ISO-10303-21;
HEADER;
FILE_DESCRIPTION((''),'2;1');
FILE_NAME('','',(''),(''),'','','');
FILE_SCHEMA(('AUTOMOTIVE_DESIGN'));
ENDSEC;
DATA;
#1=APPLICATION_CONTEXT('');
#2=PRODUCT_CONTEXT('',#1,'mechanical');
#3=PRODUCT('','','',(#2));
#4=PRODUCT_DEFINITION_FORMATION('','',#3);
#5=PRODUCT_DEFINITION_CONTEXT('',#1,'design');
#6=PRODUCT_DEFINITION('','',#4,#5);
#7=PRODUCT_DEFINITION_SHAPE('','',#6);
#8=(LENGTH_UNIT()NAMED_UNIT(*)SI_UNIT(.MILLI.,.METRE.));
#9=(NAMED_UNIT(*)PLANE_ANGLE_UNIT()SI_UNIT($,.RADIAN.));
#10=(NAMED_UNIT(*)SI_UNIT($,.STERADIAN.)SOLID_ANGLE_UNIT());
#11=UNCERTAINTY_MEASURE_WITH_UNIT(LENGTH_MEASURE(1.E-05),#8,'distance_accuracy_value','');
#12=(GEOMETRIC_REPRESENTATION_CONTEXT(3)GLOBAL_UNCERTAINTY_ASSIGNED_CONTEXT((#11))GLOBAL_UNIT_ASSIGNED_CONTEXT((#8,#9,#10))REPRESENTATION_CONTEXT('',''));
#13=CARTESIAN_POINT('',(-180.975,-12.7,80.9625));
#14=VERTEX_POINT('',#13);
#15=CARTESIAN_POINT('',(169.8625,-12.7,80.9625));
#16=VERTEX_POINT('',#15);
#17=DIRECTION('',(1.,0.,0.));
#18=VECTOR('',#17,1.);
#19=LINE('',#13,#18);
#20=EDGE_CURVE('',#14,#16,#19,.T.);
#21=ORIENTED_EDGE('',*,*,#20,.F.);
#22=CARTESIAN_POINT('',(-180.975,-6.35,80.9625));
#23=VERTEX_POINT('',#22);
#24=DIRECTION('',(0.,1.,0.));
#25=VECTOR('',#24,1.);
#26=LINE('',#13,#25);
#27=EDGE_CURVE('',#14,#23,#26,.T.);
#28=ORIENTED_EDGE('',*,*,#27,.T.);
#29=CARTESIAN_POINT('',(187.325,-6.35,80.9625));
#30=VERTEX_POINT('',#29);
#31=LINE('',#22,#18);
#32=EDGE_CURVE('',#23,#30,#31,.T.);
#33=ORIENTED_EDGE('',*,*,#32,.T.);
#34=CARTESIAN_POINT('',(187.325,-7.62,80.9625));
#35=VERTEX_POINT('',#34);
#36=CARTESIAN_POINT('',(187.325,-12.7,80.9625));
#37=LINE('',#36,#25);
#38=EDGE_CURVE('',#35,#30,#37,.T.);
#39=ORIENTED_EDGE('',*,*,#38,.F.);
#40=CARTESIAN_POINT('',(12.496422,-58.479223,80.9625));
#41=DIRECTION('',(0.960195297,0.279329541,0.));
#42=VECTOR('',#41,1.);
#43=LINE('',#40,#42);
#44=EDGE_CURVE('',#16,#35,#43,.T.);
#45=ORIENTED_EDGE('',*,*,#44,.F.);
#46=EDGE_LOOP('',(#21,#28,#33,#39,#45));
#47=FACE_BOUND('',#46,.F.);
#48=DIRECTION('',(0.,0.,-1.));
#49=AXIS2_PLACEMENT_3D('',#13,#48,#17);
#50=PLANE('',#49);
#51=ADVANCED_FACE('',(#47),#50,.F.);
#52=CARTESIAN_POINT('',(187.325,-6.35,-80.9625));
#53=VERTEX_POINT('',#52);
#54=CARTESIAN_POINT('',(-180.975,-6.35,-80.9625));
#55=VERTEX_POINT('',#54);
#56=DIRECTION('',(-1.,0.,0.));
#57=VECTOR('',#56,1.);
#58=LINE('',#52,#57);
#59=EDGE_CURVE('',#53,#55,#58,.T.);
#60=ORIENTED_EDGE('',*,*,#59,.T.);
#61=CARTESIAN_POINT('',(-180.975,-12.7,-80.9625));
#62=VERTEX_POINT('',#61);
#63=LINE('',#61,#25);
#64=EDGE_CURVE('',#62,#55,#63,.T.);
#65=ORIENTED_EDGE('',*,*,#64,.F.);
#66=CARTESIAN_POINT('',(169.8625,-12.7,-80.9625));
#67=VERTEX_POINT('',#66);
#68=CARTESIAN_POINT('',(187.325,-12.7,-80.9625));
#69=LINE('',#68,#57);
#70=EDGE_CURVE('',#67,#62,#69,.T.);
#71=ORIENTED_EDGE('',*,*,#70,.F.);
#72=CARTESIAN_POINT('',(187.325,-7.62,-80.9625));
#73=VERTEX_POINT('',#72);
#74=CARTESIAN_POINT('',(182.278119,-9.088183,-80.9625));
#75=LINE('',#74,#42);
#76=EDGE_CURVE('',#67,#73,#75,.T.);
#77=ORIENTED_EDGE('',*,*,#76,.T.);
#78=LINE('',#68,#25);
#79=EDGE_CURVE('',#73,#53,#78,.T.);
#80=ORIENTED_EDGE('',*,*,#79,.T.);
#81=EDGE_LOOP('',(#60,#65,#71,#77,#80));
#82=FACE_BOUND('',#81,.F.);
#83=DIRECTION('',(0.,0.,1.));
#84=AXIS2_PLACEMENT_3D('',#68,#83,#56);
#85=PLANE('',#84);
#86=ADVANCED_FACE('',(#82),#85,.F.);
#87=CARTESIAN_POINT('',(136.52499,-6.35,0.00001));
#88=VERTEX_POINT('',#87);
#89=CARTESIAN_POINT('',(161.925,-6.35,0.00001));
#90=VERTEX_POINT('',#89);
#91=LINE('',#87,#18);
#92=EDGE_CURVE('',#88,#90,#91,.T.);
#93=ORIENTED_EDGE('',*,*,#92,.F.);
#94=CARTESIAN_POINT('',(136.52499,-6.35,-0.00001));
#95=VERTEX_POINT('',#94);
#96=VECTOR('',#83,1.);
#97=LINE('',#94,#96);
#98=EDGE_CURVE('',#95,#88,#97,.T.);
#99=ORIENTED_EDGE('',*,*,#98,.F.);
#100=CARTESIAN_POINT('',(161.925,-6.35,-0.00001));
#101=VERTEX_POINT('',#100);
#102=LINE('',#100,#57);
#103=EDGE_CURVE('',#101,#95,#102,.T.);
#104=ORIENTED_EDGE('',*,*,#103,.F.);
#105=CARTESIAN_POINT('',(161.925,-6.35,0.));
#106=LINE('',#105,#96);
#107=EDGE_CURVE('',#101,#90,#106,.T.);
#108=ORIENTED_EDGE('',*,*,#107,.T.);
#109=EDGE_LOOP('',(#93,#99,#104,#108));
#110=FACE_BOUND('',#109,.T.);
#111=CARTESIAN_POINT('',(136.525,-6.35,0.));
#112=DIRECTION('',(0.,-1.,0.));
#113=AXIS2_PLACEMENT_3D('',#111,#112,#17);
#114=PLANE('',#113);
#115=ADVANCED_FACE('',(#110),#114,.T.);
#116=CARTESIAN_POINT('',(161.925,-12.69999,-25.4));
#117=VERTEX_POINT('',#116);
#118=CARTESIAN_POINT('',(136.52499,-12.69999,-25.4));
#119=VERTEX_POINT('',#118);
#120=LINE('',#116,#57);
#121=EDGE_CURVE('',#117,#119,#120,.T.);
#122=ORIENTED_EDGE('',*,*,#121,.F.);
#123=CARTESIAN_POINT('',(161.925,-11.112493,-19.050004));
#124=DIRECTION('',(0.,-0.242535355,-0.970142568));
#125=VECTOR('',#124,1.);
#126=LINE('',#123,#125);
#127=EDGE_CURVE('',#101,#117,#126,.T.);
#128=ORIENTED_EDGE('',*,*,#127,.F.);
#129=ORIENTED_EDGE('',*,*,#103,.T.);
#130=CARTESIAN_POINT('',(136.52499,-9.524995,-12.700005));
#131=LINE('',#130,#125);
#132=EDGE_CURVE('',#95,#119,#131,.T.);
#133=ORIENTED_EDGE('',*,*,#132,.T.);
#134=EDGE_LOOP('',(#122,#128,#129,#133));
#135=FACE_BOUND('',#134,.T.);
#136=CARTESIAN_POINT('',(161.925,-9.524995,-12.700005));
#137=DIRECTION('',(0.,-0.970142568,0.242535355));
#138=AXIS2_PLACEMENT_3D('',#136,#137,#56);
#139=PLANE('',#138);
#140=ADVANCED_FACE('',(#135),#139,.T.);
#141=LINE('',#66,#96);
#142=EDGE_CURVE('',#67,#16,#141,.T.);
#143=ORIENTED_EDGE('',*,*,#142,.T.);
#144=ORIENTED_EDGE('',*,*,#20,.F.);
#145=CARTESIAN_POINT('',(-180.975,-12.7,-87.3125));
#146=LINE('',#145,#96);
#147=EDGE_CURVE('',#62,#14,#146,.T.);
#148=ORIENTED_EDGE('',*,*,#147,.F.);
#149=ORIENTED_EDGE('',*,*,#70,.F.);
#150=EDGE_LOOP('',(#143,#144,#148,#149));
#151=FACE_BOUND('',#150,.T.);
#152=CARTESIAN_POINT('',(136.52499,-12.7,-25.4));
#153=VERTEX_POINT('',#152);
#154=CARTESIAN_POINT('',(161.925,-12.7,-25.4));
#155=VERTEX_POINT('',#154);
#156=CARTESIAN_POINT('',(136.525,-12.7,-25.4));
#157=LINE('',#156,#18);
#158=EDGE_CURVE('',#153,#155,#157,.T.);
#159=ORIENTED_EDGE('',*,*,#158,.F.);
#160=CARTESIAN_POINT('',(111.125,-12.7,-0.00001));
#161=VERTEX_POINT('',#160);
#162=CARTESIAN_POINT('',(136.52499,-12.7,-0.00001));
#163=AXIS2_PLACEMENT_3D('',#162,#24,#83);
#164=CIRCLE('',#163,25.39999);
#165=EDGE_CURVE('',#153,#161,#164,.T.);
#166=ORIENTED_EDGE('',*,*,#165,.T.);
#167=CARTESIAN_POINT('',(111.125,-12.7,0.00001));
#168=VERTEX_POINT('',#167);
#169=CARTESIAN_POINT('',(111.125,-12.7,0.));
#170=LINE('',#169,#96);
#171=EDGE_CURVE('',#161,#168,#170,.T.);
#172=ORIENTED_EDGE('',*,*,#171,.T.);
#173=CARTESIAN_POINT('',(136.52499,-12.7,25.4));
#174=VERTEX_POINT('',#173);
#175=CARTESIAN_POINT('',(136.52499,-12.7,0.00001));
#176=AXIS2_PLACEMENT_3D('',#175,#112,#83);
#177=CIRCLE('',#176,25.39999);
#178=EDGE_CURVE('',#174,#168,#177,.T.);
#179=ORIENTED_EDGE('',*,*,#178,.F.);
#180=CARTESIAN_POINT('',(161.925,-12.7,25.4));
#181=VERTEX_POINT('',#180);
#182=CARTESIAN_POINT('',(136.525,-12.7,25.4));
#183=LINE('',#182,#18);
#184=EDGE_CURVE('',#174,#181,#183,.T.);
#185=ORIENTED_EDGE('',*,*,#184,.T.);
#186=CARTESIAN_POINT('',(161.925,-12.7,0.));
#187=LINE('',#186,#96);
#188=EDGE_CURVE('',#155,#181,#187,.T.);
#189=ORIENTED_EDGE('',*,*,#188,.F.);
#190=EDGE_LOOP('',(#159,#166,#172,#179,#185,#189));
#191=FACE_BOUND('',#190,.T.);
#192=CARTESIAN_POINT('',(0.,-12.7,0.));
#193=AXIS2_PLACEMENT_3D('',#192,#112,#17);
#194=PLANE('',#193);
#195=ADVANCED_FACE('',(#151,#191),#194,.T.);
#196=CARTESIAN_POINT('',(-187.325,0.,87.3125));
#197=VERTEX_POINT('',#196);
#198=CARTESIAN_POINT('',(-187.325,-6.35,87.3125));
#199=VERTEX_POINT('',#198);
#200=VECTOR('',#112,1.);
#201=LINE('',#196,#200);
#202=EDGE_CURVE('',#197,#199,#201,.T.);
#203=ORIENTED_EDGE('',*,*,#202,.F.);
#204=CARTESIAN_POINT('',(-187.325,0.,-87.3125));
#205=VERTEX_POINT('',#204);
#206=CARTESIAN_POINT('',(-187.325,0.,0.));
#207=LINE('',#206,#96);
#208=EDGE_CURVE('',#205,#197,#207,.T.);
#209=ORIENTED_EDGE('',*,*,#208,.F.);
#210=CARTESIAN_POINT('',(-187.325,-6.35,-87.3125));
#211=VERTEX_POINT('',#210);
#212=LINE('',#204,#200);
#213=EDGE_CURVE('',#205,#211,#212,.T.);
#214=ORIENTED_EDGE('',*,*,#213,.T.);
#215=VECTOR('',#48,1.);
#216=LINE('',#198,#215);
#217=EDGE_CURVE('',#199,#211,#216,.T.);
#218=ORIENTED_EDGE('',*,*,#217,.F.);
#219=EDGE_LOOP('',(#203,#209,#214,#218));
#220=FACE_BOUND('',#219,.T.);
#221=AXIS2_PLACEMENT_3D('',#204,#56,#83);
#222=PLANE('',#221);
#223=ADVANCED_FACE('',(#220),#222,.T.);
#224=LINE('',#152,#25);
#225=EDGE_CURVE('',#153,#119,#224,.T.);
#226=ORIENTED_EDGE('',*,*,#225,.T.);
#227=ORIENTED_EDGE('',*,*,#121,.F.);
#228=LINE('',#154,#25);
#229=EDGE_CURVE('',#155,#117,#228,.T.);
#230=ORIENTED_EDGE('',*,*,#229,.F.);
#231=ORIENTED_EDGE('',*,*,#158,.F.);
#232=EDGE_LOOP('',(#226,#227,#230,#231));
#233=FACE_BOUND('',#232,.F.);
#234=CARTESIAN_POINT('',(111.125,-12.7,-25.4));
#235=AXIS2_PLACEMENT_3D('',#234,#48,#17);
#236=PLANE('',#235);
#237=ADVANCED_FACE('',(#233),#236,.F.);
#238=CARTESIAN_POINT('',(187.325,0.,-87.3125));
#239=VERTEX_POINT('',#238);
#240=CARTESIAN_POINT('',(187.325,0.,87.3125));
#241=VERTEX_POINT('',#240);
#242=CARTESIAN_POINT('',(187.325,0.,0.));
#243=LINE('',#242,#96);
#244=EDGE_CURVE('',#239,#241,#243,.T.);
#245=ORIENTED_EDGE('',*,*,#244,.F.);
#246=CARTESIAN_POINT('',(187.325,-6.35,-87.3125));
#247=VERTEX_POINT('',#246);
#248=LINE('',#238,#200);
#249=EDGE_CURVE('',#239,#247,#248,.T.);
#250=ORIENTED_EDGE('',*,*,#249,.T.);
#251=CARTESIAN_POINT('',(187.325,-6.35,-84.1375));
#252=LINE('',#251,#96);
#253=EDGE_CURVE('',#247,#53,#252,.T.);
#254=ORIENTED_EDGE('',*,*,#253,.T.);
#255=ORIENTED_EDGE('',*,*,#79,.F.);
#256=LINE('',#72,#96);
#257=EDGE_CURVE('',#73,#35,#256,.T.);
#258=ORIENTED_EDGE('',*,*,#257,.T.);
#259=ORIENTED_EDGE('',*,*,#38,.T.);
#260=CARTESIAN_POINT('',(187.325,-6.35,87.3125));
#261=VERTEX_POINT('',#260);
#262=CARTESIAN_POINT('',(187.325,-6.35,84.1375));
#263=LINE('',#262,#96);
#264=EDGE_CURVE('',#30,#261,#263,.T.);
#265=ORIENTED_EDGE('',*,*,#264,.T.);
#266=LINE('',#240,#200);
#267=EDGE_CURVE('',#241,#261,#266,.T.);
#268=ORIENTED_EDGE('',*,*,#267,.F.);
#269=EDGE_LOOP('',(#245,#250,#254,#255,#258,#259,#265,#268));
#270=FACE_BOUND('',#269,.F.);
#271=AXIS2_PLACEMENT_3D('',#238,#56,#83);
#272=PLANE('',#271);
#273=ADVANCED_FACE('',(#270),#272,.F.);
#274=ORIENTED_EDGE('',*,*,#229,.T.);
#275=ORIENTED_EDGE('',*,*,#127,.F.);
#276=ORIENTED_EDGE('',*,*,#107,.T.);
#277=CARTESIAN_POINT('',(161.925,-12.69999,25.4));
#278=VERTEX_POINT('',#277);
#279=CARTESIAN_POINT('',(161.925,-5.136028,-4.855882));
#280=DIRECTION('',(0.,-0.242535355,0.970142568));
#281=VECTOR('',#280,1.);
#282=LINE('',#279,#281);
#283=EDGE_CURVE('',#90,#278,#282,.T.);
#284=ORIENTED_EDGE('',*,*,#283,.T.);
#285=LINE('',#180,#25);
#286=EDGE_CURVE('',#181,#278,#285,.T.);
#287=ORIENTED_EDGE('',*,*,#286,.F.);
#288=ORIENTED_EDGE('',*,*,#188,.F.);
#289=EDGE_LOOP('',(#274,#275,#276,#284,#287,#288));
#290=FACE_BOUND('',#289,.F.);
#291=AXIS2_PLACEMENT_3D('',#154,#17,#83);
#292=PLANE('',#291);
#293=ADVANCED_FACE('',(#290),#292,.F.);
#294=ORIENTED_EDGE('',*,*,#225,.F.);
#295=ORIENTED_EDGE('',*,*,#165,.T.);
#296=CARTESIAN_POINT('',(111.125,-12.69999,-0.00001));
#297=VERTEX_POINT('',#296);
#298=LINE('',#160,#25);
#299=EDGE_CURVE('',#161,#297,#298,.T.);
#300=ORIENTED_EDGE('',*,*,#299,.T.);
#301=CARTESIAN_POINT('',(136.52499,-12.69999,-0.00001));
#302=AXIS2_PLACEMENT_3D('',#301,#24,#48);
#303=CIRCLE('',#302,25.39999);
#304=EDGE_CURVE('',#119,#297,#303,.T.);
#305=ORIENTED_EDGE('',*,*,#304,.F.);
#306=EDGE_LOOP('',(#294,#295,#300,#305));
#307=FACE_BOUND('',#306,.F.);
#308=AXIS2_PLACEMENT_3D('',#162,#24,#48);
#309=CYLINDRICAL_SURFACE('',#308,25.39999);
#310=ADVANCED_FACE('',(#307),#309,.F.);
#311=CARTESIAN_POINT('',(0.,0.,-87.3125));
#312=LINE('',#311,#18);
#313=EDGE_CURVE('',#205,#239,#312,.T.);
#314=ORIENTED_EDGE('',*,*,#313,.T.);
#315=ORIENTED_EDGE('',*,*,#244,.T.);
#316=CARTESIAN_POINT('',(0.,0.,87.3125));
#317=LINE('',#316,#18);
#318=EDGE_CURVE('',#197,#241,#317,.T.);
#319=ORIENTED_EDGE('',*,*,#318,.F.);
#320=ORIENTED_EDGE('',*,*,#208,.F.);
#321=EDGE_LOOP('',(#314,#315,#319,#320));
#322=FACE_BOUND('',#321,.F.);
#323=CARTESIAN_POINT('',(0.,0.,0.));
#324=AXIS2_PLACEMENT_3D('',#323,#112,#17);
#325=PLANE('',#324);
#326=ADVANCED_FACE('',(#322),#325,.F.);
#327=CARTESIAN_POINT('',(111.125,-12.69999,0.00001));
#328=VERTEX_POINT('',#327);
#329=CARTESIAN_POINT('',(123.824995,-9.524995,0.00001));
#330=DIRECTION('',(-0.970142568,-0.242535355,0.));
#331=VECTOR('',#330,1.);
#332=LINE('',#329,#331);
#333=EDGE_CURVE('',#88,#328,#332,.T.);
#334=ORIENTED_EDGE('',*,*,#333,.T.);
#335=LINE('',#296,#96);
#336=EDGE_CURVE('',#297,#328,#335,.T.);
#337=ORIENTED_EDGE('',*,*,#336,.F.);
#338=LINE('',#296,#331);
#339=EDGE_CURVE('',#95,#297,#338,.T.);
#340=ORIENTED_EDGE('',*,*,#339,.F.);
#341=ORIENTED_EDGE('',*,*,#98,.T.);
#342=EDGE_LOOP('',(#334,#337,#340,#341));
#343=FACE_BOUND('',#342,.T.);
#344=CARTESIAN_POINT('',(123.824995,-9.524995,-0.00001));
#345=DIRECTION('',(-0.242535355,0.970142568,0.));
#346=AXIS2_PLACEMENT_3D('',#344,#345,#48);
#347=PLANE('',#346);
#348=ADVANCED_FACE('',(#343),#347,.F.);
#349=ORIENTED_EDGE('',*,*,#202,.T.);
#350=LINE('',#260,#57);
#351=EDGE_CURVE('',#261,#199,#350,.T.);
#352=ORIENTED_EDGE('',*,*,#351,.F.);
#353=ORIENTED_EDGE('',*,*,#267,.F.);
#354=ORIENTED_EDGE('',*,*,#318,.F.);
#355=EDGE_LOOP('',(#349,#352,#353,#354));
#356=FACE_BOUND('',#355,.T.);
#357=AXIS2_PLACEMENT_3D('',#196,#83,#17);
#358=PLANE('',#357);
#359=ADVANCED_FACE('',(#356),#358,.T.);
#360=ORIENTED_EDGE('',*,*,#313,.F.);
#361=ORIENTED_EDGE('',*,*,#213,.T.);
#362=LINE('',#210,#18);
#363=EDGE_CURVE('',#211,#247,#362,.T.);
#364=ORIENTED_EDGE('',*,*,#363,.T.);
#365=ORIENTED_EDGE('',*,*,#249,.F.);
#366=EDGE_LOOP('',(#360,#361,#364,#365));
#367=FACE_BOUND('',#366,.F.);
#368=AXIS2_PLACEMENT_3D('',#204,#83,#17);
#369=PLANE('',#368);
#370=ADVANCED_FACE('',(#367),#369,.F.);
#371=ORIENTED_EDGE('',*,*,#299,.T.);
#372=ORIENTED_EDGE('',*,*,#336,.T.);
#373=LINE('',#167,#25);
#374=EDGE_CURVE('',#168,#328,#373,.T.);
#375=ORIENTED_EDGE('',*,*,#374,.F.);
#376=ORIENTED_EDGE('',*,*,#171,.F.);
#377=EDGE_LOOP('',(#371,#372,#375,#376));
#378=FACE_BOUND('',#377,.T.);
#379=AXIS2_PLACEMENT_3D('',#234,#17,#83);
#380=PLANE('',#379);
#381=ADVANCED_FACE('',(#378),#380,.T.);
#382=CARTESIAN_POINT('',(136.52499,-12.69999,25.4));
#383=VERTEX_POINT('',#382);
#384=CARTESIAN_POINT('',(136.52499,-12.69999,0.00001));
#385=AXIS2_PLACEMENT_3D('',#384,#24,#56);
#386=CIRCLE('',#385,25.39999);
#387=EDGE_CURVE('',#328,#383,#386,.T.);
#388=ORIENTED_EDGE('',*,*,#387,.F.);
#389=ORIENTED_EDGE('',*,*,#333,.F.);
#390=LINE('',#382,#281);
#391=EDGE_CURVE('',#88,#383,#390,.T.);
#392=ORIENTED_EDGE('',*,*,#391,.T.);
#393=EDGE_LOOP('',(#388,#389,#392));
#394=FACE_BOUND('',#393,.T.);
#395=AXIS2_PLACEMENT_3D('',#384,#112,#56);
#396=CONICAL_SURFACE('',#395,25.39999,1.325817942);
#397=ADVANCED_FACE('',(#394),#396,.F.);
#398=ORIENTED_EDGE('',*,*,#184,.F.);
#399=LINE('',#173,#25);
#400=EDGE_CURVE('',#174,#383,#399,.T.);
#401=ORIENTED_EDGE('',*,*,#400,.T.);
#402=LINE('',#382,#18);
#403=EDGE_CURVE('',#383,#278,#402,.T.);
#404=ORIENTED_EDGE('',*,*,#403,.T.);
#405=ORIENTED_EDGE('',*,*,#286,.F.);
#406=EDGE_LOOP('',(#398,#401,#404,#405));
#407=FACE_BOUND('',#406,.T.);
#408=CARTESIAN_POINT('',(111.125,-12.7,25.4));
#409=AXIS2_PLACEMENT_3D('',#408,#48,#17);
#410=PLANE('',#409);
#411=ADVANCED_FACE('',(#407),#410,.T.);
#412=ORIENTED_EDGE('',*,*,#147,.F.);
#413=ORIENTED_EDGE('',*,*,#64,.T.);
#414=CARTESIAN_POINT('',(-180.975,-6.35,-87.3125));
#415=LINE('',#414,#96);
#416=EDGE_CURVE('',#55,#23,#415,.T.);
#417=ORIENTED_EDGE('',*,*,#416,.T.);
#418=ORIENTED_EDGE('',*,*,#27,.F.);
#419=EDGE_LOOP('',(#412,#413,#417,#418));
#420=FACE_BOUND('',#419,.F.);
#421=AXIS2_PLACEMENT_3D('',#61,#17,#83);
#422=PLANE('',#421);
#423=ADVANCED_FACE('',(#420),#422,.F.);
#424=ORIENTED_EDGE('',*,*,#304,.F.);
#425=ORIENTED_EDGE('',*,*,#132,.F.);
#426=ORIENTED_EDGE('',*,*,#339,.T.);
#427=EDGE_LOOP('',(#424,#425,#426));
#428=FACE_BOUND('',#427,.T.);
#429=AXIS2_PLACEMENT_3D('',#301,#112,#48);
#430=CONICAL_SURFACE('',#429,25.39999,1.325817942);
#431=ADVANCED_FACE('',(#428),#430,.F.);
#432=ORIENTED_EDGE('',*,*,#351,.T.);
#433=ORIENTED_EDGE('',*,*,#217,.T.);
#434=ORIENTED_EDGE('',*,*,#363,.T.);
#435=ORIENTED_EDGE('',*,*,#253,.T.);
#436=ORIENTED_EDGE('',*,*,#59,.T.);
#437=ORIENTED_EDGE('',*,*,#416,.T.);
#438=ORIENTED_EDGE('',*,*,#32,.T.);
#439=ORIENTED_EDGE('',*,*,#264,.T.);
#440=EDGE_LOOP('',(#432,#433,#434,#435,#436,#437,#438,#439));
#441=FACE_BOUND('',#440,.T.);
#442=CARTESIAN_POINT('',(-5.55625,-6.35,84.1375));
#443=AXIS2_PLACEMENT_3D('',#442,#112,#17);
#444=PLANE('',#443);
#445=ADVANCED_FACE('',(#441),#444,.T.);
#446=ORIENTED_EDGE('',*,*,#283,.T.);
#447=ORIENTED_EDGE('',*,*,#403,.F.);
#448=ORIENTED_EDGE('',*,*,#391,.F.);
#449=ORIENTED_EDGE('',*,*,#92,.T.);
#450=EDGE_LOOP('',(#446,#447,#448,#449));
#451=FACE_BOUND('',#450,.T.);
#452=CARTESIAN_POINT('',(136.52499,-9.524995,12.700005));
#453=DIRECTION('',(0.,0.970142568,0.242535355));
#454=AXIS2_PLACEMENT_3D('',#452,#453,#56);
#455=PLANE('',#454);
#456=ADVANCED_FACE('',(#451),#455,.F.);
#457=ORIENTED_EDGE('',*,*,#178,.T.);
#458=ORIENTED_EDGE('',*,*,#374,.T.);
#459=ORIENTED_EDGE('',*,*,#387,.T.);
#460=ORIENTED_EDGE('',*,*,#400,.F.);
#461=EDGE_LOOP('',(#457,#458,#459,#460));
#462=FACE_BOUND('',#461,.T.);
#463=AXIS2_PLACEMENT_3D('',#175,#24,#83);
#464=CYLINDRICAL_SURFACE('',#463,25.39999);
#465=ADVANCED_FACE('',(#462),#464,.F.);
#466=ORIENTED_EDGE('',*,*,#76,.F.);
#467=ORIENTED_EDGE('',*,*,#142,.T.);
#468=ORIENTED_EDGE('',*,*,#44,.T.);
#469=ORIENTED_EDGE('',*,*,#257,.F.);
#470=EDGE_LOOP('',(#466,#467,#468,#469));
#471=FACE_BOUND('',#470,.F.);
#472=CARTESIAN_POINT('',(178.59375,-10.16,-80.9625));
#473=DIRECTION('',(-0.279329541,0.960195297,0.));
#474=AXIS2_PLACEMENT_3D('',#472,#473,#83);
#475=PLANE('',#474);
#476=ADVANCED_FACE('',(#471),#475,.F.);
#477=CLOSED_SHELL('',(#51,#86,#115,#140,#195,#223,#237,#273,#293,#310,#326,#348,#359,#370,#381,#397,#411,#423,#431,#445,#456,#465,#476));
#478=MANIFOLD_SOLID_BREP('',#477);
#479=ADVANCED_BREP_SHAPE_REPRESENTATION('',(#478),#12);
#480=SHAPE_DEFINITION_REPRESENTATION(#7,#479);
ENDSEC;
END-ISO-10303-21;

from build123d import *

# Parameters (mm, degrees)
F0_W     = 374.65
F0_H     = 174.625
F1_DEPTH = 12.7
F2_W     = 350.8375
F2_H     = 6.35
F2_W_2   = 6.35
F2_H_2   = 161.925
F2_W_3   = 17.4625
F3_DEPTH = 6.35
F4_SIZE2 = 5.08
F4_SIZE  = 17.4625
F2_W_4   = 50.8
F2_H_3   = 50.8
F5_DEPTH = 6.35
F6_R     = 25.39999
F7_SIZE2 = 6.34999
F7_SIZE  = 25.39999


# Not quite as in the source:
# - a fillet or chamfer is up to 0.001 mm smaller than in the source, because OpenCascade refuses the exact size


with BuildPart() as f1:
    # F0 (on Front) → F1 (new body)
    with BuildSketch(Plane.XZ):
        Rectangle(F0_W, F0_H)
    extrude(amount=F1_DEPTH)

    # F2 (on face) → F3 (cut)
    with BuildSketch(Plane.XZ.offset(12.7)):
        with Locations((-5.55625, 84.1375)):
            Rectangle(F2_W, F2_H)
        with Locations((-184.15, 84.1375)):
            Rectangle(F2_W_2, F2_H)
        with Locations((-184.15, 0)):
            Rectangle(F2_W_2, F2_H_2)
        with Locations((-184.15, -84.1375)):
            Rectangle(F2_W_2, F2_H)
        with Locations((-5.55625, -84.1375)):
            Rectangle(F2_W, F2_H)
        with Locations((178.59375, -84.1375)):
            Rectangle(F2_W_3, F2_H)
        with Locations((178.59375, 84.1375)):
            Rectangle(F2_W_3, F2_H)
    extrude(amount=-F3_DEPTH, mode=Mode.SUBTRACT)

    # F4
    f4_edges = [f1.edges().sort_by_distance(p)[0] for p in [
        (187.325, -12.7, 0),
    ]]
    f4_side = f1.faces().sort_by_distance((3.175, -12.7, 0))[0]
    chamfer(f4_edges, length=F4_SIZE, length2=F4_SIZE2, reference=f4_side)

    # F2 (on face) → F5 (cut)
    with BuildSketch(Plane.XZ.offset(12.7)):
        with Locations((136.525, 0)):
            Rectangle(F2_W_4, F2_H_3)
    extrude(amount=-F5_DEPTH, mode=Mode.SUBTRACT)

    # F6 (radius 25.4 in the source; OpenCascade refuses exactly that, so slightly less here)
    f6_edges = [f1.edges().sort_by_distance(p)[0] for p in [
        (111.125, -9.525, -25.4),
        (111.125, -9.525, 25.4),
    ]]
    fillet(f6_edges, radius=F6_R)

    # F7 (size 25.4 and 6.35 in the source; OpenCascade refuses exactly that, so slightly less here)
    f7_edges = [f1.edges().sort_by_distance(p)[0] for p in [
        (118.564485, -6.35, -17.960515),
    ]]
    f7_side = f1.faces().sort_by_distance((138.896085, -6.35, 0))[0]
    chamfer(f7_edges, length=F7_SIZE, length2=F7_SIZE2, reference=f7_side)


solid = f1.part
